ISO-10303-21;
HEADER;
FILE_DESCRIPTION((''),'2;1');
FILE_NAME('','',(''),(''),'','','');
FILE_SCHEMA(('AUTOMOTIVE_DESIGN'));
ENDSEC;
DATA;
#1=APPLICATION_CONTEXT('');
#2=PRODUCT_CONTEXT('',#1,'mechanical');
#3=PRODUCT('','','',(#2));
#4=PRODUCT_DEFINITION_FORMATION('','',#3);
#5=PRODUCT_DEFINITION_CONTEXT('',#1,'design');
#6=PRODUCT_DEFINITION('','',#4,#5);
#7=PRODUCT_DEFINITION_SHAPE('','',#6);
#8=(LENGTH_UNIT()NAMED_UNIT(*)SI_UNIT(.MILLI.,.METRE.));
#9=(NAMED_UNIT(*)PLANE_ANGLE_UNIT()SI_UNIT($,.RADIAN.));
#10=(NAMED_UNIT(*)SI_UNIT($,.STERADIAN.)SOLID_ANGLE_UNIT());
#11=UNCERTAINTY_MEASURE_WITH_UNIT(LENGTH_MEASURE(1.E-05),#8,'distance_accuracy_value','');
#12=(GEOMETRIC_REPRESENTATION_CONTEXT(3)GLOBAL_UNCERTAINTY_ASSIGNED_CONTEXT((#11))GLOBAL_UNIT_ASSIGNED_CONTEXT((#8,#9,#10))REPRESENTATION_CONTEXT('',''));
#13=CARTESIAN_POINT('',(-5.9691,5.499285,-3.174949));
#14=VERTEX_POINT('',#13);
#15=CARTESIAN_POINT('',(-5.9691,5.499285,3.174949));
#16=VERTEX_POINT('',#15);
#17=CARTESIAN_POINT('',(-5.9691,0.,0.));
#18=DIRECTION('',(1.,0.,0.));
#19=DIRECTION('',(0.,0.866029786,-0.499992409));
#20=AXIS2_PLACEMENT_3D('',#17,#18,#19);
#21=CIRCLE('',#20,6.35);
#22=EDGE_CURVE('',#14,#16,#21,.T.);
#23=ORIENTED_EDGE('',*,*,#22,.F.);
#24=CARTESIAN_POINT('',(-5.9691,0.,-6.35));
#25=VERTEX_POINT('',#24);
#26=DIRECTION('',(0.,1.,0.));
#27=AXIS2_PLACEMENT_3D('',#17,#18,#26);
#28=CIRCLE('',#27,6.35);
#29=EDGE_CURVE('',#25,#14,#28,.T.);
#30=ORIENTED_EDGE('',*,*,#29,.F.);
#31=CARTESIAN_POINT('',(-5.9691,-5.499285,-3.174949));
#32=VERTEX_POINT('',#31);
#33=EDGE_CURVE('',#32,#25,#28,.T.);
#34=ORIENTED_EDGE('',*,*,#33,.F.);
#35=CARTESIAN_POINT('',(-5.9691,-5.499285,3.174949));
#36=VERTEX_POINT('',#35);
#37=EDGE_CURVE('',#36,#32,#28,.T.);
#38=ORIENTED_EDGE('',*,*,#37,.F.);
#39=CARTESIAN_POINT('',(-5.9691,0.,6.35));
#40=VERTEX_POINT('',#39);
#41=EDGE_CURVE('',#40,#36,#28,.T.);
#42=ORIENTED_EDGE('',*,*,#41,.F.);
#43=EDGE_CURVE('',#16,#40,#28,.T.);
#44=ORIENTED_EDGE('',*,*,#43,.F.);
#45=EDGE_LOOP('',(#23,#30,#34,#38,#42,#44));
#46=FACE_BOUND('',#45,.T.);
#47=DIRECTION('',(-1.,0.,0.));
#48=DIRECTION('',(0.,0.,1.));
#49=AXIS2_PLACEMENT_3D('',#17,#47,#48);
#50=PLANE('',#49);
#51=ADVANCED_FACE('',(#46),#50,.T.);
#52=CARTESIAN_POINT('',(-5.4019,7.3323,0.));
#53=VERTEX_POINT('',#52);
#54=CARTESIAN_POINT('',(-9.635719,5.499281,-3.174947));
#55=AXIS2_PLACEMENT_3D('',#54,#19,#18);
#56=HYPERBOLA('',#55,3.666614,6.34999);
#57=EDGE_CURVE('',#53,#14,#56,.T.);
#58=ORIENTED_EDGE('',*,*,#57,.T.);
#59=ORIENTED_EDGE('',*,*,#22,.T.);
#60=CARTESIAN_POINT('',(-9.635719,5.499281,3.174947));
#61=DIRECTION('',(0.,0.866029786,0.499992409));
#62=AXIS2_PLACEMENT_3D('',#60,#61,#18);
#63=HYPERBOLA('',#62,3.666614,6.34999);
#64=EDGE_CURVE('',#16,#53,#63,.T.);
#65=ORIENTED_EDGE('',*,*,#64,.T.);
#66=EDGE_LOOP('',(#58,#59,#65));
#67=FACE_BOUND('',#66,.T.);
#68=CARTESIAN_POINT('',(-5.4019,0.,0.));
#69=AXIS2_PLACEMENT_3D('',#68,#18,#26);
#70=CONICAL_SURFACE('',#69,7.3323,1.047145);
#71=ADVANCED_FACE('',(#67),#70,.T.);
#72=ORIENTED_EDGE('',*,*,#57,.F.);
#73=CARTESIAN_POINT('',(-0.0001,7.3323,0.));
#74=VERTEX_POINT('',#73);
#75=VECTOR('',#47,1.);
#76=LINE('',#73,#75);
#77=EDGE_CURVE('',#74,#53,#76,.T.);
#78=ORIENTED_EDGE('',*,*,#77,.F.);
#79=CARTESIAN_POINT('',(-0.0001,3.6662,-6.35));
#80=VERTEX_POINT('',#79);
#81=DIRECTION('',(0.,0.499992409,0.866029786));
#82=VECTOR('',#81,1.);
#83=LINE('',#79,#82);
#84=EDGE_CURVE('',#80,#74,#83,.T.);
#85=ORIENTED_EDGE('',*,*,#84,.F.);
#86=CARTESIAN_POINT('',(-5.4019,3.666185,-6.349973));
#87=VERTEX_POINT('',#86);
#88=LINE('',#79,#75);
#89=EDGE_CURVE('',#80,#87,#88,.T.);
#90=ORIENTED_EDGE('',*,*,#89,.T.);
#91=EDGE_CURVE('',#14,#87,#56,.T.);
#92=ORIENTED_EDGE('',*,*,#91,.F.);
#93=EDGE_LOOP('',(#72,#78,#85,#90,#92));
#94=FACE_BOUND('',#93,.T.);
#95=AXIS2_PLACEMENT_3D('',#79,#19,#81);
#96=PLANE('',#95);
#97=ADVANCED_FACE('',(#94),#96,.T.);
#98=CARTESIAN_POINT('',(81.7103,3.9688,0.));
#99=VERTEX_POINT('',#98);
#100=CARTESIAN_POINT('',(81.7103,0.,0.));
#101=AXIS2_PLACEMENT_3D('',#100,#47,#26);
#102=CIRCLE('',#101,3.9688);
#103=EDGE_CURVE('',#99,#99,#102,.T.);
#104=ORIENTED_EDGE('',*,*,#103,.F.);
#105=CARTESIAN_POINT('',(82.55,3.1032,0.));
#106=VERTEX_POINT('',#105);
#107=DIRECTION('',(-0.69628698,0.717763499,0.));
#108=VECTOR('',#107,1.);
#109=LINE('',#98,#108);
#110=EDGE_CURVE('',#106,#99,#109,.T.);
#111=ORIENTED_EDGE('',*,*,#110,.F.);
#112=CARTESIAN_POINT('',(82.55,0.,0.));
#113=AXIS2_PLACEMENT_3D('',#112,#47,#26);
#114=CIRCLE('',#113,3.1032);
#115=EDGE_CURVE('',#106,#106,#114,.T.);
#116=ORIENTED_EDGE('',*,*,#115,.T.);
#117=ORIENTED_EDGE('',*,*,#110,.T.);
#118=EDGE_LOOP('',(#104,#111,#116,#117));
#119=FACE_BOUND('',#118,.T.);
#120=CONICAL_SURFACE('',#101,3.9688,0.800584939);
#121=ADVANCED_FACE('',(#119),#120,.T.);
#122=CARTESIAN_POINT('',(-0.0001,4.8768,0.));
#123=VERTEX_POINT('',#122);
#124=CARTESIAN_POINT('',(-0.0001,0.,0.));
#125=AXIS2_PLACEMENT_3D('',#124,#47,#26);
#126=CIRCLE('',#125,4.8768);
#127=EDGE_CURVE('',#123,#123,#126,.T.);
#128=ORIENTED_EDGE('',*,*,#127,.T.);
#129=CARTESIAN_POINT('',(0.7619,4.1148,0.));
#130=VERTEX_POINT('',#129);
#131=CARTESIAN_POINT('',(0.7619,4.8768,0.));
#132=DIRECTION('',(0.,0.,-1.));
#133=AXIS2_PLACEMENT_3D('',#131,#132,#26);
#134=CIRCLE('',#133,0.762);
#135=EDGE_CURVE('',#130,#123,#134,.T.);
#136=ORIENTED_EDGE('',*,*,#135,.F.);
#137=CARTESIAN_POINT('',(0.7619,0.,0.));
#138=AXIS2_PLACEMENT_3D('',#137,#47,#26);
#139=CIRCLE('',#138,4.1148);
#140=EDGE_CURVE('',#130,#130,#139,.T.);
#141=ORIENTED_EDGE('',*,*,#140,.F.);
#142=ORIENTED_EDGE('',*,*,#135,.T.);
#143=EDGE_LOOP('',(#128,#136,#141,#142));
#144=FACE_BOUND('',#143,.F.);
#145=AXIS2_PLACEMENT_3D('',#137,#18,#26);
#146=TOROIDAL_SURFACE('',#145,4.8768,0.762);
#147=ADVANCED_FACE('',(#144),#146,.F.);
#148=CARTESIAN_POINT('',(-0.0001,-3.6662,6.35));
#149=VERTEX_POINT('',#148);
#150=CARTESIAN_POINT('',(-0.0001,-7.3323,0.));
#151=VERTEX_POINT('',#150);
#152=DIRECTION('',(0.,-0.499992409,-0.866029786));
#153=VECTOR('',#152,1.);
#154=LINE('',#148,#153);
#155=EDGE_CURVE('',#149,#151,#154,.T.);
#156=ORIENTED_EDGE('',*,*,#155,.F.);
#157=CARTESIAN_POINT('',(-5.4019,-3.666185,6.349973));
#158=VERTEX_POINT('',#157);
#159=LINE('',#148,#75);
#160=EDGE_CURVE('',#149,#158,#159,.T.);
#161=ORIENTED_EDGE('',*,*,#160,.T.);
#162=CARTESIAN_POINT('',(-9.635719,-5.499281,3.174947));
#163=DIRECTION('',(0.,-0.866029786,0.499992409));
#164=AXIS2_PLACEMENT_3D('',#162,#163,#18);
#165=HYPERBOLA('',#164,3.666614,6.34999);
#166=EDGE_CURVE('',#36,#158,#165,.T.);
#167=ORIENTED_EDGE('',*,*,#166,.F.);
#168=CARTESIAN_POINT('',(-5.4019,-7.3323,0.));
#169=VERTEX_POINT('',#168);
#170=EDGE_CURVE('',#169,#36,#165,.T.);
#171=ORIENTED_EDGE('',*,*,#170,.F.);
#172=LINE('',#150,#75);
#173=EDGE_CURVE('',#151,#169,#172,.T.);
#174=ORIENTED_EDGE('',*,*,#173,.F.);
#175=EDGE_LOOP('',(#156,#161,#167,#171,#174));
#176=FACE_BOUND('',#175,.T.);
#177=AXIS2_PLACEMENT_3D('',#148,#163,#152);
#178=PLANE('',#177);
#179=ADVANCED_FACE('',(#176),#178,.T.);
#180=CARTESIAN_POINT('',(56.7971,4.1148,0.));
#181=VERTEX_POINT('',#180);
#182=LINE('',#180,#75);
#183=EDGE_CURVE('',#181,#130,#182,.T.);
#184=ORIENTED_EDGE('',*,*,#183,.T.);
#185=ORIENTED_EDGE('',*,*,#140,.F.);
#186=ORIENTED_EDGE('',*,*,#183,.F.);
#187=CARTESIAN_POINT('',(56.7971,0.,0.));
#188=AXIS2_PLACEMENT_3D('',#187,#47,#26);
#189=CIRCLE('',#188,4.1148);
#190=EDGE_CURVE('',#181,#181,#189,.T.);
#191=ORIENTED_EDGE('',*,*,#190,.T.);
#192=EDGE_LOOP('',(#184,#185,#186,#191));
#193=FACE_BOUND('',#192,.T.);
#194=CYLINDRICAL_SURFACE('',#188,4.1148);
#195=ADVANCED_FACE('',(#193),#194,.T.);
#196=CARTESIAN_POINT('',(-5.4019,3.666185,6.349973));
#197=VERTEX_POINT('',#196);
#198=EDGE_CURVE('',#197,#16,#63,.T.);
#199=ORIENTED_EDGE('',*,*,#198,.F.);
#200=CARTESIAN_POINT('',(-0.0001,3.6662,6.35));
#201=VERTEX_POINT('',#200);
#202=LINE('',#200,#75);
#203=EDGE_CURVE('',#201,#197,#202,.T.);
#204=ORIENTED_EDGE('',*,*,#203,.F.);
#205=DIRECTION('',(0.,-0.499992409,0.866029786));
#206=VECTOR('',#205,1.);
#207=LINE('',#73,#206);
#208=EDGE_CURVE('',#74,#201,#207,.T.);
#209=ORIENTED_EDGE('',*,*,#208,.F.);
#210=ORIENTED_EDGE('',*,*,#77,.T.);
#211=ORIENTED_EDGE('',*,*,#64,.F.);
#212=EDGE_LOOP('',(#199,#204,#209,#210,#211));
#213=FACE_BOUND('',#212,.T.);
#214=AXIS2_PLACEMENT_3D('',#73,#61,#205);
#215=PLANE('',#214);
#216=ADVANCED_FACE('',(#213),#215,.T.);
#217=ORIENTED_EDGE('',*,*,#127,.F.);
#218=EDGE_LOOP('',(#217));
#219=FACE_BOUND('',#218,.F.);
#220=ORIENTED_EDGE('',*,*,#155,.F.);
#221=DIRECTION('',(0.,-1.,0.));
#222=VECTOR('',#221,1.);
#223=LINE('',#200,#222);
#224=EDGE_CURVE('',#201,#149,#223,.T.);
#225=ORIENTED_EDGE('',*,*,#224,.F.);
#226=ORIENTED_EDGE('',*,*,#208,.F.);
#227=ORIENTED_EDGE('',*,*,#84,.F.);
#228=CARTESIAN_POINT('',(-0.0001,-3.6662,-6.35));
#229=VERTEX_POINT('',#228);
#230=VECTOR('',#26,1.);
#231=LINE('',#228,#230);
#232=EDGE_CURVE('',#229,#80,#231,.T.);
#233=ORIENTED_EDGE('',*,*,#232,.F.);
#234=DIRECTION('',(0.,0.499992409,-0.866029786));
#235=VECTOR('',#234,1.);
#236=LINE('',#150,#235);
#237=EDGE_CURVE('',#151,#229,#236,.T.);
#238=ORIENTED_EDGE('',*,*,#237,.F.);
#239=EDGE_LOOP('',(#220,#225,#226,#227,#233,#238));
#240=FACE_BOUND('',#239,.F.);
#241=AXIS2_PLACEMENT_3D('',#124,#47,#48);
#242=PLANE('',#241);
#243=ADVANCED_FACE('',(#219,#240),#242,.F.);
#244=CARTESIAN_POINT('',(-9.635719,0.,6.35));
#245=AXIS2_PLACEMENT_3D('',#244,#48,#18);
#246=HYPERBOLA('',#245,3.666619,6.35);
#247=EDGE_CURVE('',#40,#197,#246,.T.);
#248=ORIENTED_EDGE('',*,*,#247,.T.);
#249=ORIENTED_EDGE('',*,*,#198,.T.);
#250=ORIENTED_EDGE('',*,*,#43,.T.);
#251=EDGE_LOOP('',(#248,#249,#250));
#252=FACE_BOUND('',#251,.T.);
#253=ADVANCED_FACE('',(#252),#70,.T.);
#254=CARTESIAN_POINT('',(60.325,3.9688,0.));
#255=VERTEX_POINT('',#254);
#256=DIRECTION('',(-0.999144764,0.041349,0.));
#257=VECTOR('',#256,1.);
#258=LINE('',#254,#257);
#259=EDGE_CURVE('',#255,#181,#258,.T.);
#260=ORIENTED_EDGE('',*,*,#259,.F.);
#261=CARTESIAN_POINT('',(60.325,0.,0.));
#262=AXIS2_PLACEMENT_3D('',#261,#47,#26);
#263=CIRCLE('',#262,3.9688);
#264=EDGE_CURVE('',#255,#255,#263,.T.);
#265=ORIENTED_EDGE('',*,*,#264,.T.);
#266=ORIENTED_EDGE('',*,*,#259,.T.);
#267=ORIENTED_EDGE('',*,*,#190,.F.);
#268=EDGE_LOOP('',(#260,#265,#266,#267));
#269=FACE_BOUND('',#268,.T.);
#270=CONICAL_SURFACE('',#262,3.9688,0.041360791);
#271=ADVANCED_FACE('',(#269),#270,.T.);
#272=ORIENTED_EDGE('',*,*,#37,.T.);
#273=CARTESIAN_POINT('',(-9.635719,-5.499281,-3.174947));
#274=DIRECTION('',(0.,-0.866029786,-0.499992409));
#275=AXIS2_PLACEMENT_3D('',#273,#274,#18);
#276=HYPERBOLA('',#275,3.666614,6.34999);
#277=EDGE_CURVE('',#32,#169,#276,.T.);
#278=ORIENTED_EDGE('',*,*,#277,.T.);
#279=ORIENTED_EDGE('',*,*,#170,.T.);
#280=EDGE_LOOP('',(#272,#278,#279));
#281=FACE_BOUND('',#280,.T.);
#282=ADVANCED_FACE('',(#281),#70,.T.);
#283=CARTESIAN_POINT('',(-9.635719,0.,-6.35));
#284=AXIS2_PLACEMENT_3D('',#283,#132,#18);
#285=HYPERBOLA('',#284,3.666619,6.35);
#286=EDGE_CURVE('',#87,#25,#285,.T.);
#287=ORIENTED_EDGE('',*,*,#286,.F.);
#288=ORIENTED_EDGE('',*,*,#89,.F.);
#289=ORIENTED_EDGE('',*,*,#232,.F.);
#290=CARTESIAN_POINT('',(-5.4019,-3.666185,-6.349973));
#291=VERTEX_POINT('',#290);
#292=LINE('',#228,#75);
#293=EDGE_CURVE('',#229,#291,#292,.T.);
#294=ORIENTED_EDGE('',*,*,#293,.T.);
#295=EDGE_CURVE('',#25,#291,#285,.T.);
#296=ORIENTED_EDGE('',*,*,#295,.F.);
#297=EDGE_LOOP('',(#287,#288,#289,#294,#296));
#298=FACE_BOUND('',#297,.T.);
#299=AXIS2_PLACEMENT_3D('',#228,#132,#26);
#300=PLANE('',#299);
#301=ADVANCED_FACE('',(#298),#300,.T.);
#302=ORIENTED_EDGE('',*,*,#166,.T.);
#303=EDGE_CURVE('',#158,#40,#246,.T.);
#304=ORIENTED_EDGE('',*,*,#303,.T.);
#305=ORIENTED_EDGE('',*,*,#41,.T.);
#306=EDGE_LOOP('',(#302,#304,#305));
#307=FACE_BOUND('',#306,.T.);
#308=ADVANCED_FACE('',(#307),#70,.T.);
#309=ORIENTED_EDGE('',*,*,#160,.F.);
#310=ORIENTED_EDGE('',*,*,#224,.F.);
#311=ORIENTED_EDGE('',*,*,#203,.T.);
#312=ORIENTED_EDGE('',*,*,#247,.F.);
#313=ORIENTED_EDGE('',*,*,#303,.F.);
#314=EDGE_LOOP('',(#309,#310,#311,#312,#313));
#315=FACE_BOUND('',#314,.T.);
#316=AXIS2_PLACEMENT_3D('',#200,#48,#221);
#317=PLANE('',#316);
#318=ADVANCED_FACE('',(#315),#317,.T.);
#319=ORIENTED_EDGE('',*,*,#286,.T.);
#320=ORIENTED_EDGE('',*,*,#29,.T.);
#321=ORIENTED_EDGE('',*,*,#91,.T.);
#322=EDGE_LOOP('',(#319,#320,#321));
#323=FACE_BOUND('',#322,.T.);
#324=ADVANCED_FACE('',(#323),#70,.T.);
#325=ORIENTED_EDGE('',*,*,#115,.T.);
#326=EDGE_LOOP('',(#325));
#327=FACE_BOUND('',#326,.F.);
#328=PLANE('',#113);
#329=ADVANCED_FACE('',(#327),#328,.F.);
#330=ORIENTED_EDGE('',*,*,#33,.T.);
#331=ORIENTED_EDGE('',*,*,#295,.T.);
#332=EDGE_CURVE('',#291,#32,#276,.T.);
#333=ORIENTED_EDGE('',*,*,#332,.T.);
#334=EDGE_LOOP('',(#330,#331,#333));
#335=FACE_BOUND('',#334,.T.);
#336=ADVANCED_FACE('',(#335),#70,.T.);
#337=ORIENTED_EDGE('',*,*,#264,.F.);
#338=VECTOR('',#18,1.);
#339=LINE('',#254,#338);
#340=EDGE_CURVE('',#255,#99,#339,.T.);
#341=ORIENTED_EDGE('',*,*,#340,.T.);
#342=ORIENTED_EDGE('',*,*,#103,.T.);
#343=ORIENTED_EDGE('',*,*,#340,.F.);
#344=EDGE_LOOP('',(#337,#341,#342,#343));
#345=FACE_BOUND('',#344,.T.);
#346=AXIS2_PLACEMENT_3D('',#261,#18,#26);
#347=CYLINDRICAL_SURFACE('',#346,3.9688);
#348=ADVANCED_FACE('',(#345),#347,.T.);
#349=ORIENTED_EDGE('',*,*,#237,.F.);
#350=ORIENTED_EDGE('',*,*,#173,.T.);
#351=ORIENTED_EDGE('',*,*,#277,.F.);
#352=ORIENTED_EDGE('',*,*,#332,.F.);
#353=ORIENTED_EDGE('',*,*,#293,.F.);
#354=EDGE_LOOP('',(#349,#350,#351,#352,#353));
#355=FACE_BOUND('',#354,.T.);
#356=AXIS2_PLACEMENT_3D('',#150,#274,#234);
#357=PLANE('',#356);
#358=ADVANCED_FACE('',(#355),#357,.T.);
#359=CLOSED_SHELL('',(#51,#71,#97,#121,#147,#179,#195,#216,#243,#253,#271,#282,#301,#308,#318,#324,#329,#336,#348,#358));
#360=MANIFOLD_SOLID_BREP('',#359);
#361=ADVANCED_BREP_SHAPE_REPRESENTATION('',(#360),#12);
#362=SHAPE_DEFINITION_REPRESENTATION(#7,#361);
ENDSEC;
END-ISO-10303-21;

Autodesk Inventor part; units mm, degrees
ref_plane "YZ Plane" through (0, 0, 0) normal (1, 0, 0) x (0, 1, 0)
ref_plane "XZ Plane" through (0, 0, 0) normal (0, 1, 0) x (-1, 0, 0)
sketch "Sketch1" plane through (0, 0, 0) normal (0, 0, 1) x (1, 0, 0)
  line L0 (0, 6.35) -> (0, 4.1148)
  line L1 (60.325, 3.9688) -> (82.55, 3.9688)
  line L2 (82.55, 3.9688) -> (82.55, 0)
  line L3 (82.55, 0) -> (-0.0001, 0)
  line L4 (-16.5101, 0) -> (99.06, 0) projected
  line L5 (-0.0001, 0) -> (-0.0001, 6.35)
  line L6 (-0.0001, 6.35) -> (0, 6.35)
  line L7 (60.325, 3.9688) -> (56.7971, 4.1148)
  line L8 (56.7971, 4.1148) -> (0, 4.1148)
  line L9 (0, -1.27) -> (0, 7.62) projected
  dimension "d0" = 82.55
  dimension "d1" = 22.225
  dimension "d2" = 7.9375
  dimension "d9" = 0.0001
  dimension "d10" = 12.7
  dimension "d13" = 3.5279
  dimension "d14" = 8.2296
revolve "Body" add sketch "Sketch1" angle 360 about axis through (82.55, 0, 0) along (-1, 0, 0)
sketch "Sketch2" plane through (-0.0001, 0, 0) normal (-1, 0, 0) x (0, 0, 1)
  line L0 (0, 7.3323) -> (6.35, 3.6662)
  line L1 (6.35, 3.6662) -> (6.35, -3.6662)
  line L2 (6.35, -3.6662) -> (0, -7.3323)
  line L3 (0, -7.3323) -> (-6.35, -3.6662)
  line L4 (-6.35, -3.6662) -> (-6.35, 3.6662)
  line L5 (-6.35, 3.6662) -> (0, 7.3323)
  point P0 (0, 0)
  point P1 (0, 0)
  dimension "d11" = 12.7
extrude "Head" add sketch "Sketch2" along normal blind 5.969
sketch "Sketch4" plane through (0, 0, 0) normal (0, 0, 1) x (1, 0, 0)
  line L0 (-5.9691, 6.35) -> (-5.9691, 7.3323)
  line L1 (-5.9691, 7.3323) -> (-5.4019, 7.3323)
  line L2 (-5.4019, 7.3323) -> (-5.9691, 6.35)
  line L3 (-7.1629, 0) -> (1.1937, 0) projected
  line L4 (-0.0001, 7.3323) -> (-5.9691, 7.3323) projected
  line L5 (-5.9691, 3.6662) -> (-5.9691, 7.3323) projected
  dimension "d5" = 30
  dimension "d19" = 12.7
revolve "Chamfer1" cut sketch "Sketch4" angle 360 about axis through (-10, 0, 0) along (1, 0, 0)
thread "Thread" size "5/16-18 UNC" class "2A" standard "ANSI Unified Screw Threads" length 22.225
chamfer "Chamfer2" distance 0.8656 distance2 0.8397 1 edges at (82.55, -3.9687, 0) measured on face at (82.55, 1.1714, -0.6148)
ref_plane "Work Plane1" through (1.525, 0, 0) normal (0, 0, 1) x (1, 0, 0)
fillet "Fillet2" radius 0.762 1 edges at (0, -4.1148, 0)
equation "\"d0\" = NLG"
equation "\"d1\" = GEL"
equation "\"d2\" = GD"
equation "\"d10\" = SD2"
equation "\"d14\" = BDM"
equation "\"d11\" = SW"
equation "\"d3\" = KOH - SD"
equation "\"d5\" = ANG1"
equation "\"d19\" = SW0"
equation "\"d63\" = R"
equation "\"d15\" = GEL"
equation "\"d6\" = -0.5 * SPD + 0.5 * GD"
equation "\"NLG\" = 82.55"
equation "\"GD\" = NND"
equation "\"BDM\" = 8.2296"
equation "\"KOH\" = 5.969"
equation "\"GEL\" = 22.225"
equation "\"SW\" = 12.7"
equation "\"SW0\" = SW"
equation "\"SPD\" = GD1"
equation "\"SD2\" = SW"
equation "\"SD\" = 0"
equation "\"ANG1\" = 30deg"
equation "\"GAL\" = 3.52778"
equation "\"GUL\" = 0.238 * GAL"
equation "\"R\" = 0.762"
equation "\"d62\" = -NLG - SD + GUL"
equation "\"GD1\" = 6.20621"
equation "\"THREADDIA\" = 7.9375"
equation "\"TOA\" = 30deg"
equation "\"NND\" = 7.9375"
equation "\"E0\" = 1.155 * SW"
properties part number "ANSI/ASME B18.2.1 - 5/16-18 UNC - 3.25" material "Steel, Mild"
